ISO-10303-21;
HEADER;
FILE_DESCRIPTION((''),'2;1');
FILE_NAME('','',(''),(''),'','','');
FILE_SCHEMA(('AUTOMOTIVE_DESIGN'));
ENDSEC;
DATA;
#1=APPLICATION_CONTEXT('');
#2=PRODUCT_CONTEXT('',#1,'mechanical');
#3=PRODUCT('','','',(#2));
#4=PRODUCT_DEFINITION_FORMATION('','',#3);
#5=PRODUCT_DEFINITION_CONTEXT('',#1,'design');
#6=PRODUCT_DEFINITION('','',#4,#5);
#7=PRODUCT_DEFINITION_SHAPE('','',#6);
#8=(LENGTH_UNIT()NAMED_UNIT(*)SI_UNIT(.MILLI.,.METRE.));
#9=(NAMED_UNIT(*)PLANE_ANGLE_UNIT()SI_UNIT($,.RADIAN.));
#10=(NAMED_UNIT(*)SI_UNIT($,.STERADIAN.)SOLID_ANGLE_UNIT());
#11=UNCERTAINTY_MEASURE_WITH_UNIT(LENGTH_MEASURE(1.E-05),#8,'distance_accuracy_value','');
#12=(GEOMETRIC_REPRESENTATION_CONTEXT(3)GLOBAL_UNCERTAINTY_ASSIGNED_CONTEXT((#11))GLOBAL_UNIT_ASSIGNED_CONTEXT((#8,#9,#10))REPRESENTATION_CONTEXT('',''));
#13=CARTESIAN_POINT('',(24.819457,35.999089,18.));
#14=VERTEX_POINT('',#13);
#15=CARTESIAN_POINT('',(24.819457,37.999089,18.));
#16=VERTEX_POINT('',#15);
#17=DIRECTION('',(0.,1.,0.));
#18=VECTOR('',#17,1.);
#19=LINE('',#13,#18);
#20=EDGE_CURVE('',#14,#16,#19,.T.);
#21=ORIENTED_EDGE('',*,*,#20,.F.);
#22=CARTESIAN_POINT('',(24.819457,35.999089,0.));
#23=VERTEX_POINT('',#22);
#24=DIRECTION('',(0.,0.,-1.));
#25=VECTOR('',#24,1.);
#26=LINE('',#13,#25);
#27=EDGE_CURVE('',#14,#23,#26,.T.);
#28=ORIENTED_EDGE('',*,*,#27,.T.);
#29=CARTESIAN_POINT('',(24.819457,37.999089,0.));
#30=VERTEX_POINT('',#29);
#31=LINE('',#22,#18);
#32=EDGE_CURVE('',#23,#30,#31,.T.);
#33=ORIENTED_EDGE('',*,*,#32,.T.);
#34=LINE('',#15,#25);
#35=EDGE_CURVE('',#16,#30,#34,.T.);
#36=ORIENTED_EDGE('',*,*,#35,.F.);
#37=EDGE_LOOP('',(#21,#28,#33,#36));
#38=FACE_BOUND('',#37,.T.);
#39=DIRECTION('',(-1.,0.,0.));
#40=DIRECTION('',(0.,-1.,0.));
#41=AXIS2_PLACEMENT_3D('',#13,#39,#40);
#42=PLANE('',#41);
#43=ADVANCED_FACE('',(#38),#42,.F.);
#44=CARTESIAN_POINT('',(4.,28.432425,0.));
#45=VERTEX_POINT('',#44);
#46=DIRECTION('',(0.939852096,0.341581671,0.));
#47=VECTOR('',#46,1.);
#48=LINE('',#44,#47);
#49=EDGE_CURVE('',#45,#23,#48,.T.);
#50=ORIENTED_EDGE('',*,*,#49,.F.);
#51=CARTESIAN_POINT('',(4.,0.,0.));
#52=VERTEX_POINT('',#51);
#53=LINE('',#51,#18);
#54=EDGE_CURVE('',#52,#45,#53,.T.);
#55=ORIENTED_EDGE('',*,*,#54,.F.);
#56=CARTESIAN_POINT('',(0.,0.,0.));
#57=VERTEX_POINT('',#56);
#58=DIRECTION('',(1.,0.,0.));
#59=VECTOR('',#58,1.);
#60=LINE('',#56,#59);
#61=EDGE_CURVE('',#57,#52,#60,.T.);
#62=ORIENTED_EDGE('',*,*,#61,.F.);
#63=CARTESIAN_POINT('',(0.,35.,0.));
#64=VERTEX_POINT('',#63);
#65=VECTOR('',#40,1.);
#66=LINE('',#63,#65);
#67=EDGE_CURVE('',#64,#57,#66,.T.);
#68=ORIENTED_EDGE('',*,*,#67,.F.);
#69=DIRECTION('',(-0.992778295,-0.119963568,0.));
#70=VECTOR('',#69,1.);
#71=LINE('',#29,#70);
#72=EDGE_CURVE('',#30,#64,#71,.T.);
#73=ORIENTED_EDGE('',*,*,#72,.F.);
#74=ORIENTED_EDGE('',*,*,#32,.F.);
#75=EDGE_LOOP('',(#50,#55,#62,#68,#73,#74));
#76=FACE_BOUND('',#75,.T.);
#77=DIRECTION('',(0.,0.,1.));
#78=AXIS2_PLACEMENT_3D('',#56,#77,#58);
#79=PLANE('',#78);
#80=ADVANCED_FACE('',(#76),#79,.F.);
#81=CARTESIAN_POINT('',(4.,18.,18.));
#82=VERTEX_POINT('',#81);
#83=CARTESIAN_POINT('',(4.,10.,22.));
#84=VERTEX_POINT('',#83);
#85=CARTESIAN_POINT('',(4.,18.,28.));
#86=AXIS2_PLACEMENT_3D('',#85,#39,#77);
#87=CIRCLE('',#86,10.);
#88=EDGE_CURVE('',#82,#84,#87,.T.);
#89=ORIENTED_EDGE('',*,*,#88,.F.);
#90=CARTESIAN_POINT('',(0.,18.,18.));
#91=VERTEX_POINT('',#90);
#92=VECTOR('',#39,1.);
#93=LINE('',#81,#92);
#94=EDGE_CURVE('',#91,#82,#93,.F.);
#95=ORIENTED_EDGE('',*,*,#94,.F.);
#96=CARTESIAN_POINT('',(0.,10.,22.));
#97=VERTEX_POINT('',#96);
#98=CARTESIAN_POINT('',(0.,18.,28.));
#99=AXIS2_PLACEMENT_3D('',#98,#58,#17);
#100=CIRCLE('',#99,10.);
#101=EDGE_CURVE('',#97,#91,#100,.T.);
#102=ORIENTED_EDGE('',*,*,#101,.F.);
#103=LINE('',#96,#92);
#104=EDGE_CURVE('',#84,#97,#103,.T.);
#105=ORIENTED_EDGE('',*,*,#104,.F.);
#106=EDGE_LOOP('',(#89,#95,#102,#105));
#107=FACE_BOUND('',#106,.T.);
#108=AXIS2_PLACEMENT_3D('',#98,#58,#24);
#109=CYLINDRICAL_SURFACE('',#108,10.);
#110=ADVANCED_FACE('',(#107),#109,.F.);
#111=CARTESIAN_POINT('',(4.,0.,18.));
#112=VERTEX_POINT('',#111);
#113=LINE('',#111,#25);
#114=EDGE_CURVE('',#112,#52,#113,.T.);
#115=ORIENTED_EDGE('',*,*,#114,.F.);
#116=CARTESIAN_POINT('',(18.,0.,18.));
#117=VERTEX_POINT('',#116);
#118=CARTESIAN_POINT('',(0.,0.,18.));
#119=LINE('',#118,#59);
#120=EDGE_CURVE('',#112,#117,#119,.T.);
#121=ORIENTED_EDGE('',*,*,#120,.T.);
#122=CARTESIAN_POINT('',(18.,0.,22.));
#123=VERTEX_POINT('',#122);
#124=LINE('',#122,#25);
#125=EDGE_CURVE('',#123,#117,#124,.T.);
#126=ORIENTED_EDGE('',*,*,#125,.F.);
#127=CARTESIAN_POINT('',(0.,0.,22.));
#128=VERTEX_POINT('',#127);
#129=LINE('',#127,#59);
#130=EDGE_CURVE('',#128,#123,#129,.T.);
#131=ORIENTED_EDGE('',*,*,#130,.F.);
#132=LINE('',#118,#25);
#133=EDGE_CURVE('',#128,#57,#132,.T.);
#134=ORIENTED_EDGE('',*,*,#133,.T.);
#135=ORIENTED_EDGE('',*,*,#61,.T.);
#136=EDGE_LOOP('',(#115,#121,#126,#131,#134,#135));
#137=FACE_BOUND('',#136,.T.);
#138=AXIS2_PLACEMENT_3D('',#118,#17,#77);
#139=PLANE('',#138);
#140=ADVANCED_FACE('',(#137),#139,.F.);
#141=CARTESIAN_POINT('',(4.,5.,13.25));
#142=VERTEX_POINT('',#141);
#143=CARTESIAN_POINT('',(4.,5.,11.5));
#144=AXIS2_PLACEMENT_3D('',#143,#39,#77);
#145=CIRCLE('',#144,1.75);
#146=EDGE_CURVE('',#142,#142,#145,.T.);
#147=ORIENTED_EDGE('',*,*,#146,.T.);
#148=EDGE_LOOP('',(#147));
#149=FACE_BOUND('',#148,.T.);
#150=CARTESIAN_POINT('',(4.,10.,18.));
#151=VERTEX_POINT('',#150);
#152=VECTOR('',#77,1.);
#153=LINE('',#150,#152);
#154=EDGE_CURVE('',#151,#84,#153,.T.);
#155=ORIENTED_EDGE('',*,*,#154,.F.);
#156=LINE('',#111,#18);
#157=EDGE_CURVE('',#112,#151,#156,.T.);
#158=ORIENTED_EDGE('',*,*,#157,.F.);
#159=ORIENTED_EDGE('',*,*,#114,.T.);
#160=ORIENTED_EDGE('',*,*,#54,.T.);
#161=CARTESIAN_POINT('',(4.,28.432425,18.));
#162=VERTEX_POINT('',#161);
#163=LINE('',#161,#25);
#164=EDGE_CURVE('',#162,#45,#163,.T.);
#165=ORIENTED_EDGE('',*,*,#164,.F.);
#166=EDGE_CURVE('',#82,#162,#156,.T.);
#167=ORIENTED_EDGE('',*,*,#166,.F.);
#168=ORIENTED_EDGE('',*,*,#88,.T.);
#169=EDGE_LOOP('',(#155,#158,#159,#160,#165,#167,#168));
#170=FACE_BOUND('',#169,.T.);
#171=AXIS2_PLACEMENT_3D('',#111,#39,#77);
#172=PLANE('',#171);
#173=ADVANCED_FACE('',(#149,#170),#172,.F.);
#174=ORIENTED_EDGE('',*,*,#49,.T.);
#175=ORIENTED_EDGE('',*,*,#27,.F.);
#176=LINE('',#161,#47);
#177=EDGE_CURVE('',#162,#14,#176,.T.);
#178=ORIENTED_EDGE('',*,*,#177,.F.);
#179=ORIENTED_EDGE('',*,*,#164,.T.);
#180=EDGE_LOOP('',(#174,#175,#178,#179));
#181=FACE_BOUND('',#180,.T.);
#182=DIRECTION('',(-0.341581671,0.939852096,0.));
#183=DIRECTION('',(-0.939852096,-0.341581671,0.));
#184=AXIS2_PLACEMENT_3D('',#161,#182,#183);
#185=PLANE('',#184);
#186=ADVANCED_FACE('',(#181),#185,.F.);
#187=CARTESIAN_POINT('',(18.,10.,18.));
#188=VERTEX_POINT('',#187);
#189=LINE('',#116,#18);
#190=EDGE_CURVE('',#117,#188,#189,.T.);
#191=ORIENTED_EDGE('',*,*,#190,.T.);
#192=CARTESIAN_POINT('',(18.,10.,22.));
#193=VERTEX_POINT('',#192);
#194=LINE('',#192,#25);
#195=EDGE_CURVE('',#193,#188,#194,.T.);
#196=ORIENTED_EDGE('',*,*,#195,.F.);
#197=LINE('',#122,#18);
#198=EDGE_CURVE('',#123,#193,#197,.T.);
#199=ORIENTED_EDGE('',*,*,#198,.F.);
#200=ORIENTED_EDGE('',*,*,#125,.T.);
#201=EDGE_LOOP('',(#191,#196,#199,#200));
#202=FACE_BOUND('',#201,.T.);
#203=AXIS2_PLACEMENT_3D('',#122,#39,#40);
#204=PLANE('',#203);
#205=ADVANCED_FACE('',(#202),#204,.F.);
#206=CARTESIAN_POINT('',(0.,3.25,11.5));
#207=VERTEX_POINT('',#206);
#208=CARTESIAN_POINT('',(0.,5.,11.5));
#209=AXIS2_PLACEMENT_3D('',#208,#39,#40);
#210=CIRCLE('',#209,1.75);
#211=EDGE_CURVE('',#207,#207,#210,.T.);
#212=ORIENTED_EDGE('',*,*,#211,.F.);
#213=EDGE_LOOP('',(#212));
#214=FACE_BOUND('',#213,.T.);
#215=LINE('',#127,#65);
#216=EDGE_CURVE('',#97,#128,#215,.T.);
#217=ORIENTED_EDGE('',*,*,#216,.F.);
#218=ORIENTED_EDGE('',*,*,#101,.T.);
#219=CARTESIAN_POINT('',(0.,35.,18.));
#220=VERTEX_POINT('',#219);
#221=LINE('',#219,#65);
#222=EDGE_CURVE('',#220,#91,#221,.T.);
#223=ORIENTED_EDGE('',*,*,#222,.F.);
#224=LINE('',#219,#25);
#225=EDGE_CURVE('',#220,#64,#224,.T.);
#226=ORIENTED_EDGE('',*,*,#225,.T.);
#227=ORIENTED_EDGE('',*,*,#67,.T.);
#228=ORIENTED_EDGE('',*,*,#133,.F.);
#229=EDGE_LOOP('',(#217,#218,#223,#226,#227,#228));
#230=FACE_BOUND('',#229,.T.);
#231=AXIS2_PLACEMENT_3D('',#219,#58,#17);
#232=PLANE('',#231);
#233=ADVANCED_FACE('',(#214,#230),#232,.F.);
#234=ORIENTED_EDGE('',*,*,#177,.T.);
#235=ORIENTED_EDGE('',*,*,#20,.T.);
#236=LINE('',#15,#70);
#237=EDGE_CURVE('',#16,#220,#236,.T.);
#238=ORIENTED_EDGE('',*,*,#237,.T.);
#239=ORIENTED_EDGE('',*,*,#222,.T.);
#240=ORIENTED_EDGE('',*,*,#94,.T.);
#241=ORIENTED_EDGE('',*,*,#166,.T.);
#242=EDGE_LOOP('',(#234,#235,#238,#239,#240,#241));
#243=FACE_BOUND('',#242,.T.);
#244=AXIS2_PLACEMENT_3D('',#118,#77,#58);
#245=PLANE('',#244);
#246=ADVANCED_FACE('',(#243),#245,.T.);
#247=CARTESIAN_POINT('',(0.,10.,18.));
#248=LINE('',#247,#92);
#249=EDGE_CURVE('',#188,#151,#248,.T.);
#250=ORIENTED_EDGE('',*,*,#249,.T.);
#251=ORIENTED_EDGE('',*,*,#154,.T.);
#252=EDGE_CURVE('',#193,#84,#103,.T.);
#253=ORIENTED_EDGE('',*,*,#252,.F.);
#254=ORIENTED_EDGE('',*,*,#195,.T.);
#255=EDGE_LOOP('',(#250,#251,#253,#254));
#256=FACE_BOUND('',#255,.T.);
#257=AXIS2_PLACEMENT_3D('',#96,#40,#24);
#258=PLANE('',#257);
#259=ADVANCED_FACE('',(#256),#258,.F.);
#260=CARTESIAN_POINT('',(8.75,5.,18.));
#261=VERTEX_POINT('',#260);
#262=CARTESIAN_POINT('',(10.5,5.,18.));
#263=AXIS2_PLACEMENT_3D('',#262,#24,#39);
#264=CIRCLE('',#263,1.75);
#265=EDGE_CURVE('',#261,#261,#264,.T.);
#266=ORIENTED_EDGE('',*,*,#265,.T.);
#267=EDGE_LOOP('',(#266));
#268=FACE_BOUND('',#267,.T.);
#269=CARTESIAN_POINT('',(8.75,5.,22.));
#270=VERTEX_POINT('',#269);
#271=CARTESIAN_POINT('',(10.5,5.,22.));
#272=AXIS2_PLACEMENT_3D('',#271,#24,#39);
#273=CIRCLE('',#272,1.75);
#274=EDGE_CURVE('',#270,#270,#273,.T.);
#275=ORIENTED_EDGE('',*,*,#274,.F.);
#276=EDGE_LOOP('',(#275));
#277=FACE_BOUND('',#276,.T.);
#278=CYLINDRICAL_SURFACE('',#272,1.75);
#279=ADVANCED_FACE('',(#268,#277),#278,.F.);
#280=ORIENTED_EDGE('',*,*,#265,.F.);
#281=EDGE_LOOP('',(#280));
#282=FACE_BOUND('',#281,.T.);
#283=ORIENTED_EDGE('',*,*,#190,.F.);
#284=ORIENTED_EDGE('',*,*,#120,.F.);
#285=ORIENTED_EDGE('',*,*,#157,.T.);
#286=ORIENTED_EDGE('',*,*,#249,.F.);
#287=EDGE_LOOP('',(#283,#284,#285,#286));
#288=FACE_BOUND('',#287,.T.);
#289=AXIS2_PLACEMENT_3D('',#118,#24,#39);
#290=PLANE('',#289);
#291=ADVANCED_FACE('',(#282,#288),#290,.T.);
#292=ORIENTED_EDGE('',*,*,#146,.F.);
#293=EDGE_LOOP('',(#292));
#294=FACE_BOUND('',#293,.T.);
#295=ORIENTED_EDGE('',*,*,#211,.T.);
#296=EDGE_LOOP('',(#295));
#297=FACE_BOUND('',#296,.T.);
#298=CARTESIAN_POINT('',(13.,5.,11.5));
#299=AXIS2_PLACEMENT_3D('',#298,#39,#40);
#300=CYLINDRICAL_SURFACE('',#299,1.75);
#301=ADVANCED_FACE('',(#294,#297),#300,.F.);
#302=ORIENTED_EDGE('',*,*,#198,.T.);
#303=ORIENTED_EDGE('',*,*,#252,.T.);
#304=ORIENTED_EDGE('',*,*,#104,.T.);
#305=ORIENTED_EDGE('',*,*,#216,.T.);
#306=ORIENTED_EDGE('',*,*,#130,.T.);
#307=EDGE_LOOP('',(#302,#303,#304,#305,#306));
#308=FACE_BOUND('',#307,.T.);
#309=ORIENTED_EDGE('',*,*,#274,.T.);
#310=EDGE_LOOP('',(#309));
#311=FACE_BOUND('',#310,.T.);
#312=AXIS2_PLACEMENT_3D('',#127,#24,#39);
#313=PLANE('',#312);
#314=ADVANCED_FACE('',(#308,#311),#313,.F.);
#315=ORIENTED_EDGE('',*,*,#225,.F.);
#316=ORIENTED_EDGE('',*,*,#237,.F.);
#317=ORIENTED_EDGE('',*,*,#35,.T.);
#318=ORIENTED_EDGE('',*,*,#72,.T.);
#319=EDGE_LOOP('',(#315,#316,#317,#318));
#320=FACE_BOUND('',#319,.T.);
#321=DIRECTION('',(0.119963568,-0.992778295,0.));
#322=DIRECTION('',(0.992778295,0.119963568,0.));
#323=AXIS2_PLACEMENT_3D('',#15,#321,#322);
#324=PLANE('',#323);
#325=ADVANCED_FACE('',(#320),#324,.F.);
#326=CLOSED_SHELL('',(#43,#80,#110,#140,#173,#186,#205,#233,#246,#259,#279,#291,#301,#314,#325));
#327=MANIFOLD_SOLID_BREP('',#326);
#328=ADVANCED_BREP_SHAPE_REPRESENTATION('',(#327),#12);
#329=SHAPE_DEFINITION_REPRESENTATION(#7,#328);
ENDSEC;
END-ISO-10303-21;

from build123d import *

# Parameters (mm, degrees)
EXTRUDE_1_DEPTH     = 18
SKETCH_2_R          = 1.75
CUT_EXTRUDE_1_DEPTH = 13
SKETCH_3_W          = 18
SKETCH_3_H          = 10
EXTRUDE_2_DEPTH     = 4
SKETCH_10_R         = 1.75
CUT_EXTRUDE_2_DEPTH = 49.825569575
FILLET_1_R          = 10


with BuildPart() as part:
    # 草图1 → 凸台-拉伸1 (new body)
    with BuildSketch(Plane.XY):
        Polygon((0, 0), (4, 0), (4, 28.432425182), (24.819457366, 35.999089204), (24.819457366, 37.999089204), (0, 35), align=None)
    extrude(amount=EXTRUDE_1_DEPTH)

    # 草图2 → 切除-拉伸1 (cut)
    with BuildSketch(Plane.ZY):
        with Locations(Location((11.5, 5, 0), (0, 0, 270))):
            Circle(SKETCH_2_R)
    extrude(amount=-CUT_EXTRUDE_1_DEPTH, mode=Mode.SUBTRACT)

    # 草图3 → 凸台-拉伸2 (add)
    with BuildSketch(Plane.XY.offset(18)):
        with Locations((9, 5)):
            Rectangle(SKETCH_3_W, SKETCH_3_H)
    extrude(amount=EXTRUDE_2_DEPTH)

    # 草图10 → 切除-拉伸2 (cut, through all)
    with BuildSketch(Plane(origin=(0, 0, 18), x_dir=(-1, 0, 0), z_dir=(0, 0, -1))):
        with Locations((-10.5, 5)):
            Circle(SKETCH_10_R)
    extrude(amount=-CUT_EXTRUDE_2_DEPTH, mode=Mode.SUBTRACT)

    # 圆角1
    # the kernel refuses this fillet: 10 mm, written as the material it adds along each edge
    with BuildSketch(Plane(origin=(4, 10, 18), x_dir=(0, 1, 0), z_dir=(-1, 0, 0))) as fillet_1_piece_1:
        with BuildLine():
            CenterArc((8, -10), FILLET_1_R, 90, 53.130102354)
            Line((0, -4), (0, 0))
            Line((0, 0), (8, 0))
        make_face()
    extrude(amount=4)


solid = part.part
